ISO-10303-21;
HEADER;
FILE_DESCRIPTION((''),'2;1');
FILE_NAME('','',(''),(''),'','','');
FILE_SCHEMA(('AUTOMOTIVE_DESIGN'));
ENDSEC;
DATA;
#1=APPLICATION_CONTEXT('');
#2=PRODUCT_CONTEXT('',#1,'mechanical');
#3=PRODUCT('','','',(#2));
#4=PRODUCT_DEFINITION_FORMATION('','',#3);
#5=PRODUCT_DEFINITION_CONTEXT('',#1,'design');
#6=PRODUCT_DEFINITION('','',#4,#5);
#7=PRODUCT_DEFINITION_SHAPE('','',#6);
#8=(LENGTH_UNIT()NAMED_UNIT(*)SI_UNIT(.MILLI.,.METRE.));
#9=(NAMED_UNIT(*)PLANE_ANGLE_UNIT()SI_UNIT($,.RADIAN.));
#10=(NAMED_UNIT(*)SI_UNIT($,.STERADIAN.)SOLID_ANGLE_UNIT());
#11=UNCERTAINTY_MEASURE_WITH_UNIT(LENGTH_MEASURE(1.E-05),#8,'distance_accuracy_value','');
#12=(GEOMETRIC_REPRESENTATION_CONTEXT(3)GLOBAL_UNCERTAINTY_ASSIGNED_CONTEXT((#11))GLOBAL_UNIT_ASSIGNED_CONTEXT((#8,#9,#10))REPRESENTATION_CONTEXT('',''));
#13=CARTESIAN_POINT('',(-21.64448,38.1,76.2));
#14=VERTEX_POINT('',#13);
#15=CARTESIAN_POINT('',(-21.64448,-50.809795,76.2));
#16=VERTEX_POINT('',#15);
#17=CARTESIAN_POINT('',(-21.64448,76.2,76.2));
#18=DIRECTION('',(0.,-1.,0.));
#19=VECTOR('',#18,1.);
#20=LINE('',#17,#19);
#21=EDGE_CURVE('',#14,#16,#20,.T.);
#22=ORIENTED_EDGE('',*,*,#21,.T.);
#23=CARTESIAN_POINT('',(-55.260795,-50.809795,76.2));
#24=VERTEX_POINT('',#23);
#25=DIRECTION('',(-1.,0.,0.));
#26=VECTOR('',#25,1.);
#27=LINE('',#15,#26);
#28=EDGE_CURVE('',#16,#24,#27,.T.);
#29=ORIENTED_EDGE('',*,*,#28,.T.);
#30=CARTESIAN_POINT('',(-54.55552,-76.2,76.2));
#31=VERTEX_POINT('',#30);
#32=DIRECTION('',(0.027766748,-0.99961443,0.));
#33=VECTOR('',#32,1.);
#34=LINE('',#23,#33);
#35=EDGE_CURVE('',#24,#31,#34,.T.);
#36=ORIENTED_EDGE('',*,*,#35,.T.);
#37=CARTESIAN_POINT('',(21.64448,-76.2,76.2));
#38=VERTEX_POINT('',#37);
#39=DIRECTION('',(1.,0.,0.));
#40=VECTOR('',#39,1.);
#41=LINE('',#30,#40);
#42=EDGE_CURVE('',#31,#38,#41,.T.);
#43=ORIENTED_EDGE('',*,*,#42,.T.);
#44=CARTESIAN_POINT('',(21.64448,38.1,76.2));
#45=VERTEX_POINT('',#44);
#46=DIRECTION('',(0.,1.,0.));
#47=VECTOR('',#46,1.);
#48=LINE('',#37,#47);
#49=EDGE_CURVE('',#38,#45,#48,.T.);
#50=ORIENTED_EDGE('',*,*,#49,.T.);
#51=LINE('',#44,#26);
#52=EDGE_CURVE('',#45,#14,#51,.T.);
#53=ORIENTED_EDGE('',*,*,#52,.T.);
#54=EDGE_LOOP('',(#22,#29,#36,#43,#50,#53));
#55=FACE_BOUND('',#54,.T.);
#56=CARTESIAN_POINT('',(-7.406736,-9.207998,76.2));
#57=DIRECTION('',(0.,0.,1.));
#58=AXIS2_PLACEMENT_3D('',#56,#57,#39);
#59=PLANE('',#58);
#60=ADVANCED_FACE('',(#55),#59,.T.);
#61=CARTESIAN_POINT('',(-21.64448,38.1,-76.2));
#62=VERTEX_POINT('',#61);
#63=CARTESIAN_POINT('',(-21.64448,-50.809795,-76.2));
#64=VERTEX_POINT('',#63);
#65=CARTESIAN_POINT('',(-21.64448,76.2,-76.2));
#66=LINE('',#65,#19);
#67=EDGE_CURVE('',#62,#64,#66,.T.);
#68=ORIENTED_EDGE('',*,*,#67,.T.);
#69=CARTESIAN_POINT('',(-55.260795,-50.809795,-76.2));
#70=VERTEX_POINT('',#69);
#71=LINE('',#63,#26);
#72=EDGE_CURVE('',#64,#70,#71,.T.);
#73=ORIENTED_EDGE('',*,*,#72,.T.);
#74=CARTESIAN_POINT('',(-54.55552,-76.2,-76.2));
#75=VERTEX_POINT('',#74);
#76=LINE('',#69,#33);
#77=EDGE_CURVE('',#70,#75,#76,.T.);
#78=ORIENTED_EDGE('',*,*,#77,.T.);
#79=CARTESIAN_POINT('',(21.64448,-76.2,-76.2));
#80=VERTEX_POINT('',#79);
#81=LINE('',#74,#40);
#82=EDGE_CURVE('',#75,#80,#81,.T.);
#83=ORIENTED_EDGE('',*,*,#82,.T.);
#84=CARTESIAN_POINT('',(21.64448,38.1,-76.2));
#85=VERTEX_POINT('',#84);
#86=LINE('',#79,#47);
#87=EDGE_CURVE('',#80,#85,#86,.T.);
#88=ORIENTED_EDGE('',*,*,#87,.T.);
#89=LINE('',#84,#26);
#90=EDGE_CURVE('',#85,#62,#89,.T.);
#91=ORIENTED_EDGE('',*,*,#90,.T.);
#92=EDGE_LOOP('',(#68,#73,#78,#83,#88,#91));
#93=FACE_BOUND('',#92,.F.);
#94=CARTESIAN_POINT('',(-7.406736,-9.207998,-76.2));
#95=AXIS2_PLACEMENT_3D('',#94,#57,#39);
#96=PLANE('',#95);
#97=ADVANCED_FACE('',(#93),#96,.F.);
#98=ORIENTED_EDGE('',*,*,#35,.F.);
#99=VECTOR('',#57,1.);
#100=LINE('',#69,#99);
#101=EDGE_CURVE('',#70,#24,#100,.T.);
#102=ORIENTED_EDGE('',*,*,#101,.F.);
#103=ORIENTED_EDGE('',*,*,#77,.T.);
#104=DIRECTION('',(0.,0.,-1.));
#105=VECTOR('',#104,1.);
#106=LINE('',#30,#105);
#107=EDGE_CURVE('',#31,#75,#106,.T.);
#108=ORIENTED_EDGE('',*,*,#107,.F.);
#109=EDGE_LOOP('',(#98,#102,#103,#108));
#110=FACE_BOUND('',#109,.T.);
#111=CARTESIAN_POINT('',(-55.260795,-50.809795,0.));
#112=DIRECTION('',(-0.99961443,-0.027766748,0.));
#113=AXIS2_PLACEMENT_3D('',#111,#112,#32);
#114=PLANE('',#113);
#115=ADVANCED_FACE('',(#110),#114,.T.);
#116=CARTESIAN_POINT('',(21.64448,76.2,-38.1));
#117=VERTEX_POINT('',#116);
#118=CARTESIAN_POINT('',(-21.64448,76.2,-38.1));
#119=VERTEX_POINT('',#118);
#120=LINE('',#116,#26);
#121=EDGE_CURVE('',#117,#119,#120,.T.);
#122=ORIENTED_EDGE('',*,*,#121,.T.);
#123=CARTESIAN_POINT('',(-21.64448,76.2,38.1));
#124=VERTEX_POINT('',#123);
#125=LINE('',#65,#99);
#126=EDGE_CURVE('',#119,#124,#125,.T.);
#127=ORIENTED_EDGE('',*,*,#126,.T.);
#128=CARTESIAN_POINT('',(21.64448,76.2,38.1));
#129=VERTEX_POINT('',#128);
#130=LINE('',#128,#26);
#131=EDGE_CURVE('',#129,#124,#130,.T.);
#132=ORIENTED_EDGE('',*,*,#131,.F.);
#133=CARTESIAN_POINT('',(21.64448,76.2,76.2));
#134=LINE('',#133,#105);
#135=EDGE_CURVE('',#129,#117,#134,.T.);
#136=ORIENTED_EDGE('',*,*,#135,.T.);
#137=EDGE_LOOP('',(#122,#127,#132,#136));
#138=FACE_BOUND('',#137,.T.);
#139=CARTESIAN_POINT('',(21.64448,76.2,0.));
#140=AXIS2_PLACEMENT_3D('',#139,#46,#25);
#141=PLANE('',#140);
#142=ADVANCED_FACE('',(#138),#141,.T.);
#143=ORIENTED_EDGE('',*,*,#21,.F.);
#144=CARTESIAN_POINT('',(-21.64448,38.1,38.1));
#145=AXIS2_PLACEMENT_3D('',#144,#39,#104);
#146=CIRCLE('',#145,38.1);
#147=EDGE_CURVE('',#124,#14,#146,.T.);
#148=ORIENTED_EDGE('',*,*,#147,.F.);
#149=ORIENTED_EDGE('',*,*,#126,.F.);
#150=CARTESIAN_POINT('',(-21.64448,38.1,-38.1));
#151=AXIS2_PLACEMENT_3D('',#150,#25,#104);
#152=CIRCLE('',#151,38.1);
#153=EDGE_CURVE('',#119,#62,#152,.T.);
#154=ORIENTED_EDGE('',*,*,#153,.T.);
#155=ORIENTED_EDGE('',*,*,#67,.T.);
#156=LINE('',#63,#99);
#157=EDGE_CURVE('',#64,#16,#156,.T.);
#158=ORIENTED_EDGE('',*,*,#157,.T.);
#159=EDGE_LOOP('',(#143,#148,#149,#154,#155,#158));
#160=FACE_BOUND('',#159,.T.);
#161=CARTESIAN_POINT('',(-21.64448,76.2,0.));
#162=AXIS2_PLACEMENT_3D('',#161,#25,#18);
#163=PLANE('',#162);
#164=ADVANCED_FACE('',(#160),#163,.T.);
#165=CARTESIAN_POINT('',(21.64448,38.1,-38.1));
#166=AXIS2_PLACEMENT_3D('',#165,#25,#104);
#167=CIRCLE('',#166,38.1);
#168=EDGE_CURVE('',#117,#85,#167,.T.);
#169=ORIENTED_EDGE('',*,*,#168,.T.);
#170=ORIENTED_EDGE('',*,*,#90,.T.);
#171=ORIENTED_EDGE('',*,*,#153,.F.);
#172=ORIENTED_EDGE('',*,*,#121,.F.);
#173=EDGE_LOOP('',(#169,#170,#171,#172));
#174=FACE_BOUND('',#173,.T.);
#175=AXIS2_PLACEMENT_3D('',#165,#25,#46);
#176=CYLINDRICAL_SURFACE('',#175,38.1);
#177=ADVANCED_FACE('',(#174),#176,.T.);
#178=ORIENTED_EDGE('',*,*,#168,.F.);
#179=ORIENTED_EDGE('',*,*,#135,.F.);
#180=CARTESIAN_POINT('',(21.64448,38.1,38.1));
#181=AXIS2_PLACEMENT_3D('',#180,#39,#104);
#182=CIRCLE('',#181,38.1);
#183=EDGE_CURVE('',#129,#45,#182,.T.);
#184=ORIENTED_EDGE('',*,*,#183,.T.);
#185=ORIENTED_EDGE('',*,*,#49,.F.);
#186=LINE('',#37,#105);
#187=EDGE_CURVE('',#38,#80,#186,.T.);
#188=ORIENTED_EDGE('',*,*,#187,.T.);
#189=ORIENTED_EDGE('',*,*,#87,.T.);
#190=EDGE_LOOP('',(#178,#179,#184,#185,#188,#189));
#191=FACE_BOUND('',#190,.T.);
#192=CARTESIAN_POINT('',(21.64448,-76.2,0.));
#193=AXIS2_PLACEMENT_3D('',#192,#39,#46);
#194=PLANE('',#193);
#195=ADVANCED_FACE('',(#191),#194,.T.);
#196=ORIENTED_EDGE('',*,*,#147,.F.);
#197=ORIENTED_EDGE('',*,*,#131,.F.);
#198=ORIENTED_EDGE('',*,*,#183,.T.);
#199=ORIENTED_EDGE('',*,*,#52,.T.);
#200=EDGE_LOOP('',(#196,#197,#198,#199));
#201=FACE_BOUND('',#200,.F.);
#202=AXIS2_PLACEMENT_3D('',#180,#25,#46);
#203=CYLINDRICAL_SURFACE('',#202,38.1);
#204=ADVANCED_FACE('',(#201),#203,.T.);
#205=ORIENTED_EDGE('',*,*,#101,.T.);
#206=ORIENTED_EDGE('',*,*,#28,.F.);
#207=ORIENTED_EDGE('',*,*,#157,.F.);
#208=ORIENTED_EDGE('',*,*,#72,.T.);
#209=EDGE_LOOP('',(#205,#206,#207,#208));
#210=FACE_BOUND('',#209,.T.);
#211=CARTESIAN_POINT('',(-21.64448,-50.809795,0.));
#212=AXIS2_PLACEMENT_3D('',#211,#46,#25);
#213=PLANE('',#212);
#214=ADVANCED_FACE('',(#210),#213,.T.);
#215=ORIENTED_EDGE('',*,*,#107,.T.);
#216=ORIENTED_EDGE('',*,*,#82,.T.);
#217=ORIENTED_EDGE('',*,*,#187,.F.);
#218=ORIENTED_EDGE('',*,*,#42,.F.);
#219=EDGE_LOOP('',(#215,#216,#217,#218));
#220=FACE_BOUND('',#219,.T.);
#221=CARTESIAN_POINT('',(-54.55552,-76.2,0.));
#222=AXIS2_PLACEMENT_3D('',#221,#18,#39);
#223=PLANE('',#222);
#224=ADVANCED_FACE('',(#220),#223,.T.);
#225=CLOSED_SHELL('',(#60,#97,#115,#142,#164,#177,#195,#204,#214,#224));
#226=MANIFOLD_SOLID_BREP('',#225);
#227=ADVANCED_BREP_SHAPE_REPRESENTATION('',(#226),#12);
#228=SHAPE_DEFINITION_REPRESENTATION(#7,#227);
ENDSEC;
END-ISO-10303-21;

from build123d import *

# Parameters (mm, degrees)
F1_DEPTH = 76.2
F2_R     = 38.1


# Not quite as in the source:
# - ends of sketch curves that miss each other by under 0.0002 mm in the source are joined


with BuildPart() as f1:
    # F0 (on Top) → F1 (new body, symmetric)
    with BuildSketch(Plane.XY):
        Polygon((21.6444802228, 76.2), (-21.6444802228, 76.2), (-21.6444802228, -50.8097953513), (-55.2607951227, -50.8097953513), (-54.5555197772, -76.2), (-21.6444802228, -76.2), (21.6444802228, -76.2), align=None)
    extrude(amount=F1_DEPTH, both=True)

    # F2
    f2_edges = [f1.edges().sort_by_distance(p)[0] for p in [
        (0, 76.2, -76.2),
        (0, 76.2, 76.2),
    ]]
    fillet(f2_edges, radius=F2_R)


solid = f1.part
